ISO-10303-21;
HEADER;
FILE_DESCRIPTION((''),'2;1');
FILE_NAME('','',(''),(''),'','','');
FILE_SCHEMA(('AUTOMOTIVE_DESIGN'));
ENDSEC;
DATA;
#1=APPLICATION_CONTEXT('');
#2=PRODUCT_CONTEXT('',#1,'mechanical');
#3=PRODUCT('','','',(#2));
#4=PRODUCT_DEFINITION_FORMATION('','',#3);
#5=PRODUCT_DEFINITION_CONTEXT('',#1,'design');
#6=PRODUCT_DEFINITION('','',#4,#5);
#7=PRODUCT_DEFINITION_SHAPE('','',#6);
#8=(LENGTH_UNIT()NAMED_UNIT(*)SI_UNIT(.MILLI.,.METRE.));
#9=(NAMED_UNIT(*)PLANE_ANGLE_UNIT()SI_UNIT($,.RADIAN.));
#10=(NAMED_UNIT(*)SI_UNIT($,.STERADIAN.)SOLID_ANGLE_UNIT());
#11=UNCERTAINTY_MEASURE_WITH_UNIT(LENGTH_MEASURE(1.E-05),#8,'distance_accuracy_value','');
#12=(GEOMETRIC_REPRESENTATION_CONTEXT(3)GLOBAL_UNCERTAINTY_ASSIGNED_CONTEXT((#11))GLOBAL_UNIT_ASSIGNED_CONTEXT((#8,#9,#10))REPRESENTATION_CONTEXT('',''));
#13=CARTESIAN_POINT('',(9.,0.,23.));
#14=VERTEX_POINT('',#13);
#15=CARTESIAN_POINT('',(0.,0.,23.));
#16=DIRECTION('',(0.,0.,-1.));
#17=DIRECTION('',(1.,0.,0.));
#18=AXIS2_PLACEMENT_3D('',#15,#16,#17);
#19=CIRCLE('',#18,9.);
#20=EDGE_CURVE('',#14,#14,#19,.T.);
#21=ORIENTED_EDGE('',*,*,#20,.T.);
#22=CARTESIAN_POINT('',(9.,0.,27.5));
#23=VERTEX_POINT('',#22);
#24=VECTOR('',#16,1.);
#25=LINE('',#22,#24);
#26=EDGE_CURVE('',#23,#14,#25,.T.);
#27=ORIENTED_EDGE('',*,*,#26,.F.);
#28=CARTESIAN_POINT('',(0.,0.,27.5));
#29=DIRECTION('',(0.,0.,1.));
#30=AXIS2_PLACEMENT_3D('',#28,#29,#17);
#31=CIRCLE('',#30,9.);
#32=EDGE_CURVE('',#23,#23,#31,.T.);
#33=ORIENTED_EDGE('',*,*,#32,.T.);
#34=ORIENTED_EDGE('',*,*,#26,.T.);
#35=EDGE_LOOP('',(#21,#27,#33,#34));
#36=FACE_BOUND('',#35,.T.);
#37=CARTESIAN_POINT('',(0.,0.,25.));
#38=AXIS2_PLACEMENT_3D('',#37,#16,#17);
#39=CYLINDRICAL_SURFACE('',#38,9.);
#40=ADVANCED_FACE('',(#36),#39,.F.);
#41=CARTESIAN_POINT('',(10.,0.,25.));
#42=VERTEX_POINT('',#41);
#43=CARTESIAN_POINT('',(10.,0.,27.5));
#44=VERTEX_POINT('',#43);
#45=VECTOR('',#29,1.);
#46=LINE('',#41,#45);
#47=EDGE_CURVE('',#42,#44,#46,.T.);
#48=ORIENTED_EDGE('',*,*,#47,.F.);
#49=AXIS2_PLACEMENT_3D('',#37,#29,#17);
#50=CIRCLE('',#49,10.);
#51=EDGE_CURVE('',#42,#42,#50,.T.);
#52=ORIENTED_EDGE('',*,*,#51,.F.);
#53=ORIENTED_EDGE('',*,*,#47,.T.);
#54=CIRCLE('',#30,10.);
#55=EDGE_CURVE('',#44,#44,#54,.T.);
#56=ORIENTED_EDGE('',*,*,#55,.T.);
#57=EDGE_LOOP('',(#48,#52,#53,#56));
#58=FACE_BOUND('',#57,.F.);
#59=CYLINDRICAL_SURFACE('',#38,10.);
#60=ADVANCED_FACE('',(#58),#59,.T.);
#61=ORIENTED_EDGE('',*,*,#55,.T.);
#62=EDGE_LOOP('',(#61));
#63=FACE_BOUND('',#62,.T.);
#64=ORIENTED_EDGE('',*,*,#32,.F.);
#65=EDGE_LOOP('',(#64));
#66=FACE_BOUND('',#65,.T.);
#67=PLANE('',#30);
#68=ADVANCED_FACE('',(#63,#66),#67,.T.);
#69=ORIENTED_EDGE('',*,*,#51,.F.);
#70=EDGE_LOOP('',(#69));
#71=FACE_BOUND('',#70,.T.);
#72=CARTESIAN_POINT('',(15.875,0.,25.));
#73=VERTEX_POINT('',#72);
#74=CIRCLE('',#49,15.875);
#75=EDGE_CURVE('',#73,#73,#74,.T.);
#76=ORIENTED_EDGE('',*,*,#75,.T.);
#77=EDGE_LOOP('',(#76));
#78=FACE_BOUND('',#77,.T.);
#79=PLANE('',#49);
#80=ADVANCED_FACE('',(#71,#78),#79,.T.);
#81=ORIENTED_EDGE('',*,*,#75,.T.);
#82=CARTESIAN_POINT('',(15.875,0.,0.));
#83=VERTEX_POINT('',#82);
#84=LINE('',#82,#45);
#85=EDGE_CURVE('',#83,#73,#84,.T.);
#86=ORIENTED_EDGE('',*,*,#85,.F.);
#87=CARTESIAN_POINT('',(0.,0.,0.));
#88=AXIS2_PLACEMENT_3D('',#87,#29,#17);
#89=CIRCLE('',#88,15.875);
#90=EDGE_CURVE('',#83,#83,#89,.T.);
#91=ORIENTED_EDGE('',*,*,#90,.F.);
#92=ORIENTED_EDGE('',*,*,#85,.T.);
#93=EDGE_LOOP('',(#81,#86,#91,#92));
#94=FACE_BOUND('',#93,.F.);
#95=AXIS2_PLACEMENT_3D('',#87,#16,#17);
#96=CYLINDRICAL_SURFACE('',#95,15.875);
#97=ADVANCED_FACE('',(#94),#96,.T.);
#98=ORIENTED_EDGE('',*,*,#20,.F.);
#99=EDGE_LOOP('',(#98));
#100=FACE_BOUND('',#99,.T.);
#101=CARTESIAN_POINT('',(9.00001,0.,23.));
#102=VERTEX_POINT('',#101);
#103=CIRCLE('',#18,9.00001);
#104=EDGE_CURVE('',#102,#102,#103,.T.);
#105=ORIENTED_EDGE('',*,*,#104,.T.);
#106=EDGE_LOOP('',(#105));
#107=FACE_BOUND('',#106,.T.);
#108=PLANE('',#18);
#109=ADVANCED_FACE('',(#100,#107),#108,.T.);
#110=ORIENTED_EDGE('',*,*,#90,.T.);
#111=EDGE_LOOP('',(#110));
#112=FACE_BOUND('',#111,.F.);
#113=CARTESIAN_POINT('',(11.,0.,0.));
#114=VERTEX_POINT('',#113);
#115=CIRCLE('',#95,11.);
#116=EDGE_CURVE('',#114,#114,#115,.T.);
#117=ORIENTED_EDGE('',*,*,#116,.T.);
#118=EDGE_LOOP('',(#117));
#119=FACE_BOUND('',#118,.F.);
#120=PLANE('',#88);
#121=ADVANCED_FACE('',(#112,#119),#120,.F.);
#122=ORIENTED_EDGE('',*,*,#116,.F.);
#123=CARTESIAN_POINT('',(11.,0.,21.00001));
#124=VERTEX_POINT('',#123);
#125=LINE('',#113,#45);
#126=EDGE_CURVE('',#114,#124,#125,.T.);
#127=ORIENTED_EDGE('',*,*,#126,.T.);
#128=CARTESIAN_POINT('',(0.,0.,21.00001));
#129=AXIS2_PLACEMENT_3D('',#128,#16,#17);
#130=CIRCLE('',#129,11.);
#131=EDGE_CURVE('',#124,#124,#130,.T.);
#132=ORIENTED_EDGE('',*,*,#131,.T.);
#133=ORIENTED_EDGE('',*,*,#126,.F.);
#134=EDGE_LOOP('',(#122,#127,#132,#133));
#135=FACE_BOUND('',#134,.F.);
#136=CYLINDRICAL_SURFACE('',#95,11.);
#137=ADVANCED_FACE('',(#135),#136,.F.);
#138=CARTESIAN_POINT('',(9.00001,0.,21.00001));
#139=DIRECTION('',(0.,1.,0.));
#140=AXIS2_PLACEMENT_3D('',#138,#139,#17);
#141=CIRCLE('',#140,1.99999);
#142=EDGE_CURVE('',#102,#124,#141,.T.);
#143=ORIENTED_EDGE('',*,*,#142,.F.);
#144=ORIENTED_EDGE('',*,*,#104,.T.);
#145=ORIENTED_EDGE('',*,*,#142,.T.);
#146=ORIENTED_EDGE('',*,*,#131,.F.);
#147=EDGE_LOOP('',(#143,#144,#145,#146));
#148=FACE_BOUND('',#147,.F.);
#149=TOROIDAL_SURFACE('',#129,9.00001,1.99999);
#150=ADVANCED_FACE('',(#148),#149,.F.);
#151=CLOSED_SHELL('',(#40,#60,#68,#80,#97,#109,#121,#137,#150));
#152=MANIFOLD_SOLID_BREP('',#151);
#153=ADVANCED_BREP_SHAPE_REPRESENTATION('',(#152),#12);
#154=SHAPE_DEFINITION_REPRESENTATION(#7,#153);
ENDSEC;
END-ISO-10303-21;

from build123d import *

# Parameters (mm, degrees)
F0_R     = 15.875
F0_R_2   = 9
F1_DEPTH = 25
F2_R     = 10
F2_R_2   = 9
F3_DEPTH = 2.5
F4_R     = 11
F4_R_2   = 9
F5_DEPTH = 23
F6_R     = 1.99999
F7_DEPTH = 2.5


# Not quite as in the source:
# - a fillet or chamfer is up to 0.001 mm smaller than in the source, because OpenCascade refuses the exact size


with BuildPart() as f1:
    # F0 (on Top) → F1 (new body)
    with BuildSketch(Plane.XY):
        Circle(F0_R)
        Circle(F0_R_2, mode=Mode.SUBTRACT)
    extrude(amount=F1_DEPTH)

    # F2 (on face) → F3 (join)
    with BuildSketch(Plane.XY.offset(25)):
        Circle(F2_R)
        Circle(F2_R_2, mode=Mode.SUBTRACT)
    extrude(amount=F3_DEPTH)

    # F4 (on face) → F5 (cut)
    with BuildSketch(Plane(origin=(0, 0, 0), x_dir=(1, 0, 0), z_dir=(0, 0, -1))):
        Circle(F4_R)
        Circle(F4_R_2, mode=Mode.SUBTRACT)
    extrude(amount=-F5_DEPTH, mode=Mode.SUBTRACT)

    # F6 (radius 2 in the source; OpenCascade refuses exactly that, so slightly less here)
    f6_edges = [f1.edges().sort_by_distance(p)[0] for p in [
        (-11, 0, 23),
    ]]
    fillet(f6_edges, radius=F6_R)

    # F2 (on face) → F7 (join)
    with BuildSketch(Plane.XY.offset(25)):
        Circle(F2_R)
        Circle(F2_R_2, mode=Mode.SUBTRACT)
    extrude(amount=F7_DEPTH)


solid = f1.part
